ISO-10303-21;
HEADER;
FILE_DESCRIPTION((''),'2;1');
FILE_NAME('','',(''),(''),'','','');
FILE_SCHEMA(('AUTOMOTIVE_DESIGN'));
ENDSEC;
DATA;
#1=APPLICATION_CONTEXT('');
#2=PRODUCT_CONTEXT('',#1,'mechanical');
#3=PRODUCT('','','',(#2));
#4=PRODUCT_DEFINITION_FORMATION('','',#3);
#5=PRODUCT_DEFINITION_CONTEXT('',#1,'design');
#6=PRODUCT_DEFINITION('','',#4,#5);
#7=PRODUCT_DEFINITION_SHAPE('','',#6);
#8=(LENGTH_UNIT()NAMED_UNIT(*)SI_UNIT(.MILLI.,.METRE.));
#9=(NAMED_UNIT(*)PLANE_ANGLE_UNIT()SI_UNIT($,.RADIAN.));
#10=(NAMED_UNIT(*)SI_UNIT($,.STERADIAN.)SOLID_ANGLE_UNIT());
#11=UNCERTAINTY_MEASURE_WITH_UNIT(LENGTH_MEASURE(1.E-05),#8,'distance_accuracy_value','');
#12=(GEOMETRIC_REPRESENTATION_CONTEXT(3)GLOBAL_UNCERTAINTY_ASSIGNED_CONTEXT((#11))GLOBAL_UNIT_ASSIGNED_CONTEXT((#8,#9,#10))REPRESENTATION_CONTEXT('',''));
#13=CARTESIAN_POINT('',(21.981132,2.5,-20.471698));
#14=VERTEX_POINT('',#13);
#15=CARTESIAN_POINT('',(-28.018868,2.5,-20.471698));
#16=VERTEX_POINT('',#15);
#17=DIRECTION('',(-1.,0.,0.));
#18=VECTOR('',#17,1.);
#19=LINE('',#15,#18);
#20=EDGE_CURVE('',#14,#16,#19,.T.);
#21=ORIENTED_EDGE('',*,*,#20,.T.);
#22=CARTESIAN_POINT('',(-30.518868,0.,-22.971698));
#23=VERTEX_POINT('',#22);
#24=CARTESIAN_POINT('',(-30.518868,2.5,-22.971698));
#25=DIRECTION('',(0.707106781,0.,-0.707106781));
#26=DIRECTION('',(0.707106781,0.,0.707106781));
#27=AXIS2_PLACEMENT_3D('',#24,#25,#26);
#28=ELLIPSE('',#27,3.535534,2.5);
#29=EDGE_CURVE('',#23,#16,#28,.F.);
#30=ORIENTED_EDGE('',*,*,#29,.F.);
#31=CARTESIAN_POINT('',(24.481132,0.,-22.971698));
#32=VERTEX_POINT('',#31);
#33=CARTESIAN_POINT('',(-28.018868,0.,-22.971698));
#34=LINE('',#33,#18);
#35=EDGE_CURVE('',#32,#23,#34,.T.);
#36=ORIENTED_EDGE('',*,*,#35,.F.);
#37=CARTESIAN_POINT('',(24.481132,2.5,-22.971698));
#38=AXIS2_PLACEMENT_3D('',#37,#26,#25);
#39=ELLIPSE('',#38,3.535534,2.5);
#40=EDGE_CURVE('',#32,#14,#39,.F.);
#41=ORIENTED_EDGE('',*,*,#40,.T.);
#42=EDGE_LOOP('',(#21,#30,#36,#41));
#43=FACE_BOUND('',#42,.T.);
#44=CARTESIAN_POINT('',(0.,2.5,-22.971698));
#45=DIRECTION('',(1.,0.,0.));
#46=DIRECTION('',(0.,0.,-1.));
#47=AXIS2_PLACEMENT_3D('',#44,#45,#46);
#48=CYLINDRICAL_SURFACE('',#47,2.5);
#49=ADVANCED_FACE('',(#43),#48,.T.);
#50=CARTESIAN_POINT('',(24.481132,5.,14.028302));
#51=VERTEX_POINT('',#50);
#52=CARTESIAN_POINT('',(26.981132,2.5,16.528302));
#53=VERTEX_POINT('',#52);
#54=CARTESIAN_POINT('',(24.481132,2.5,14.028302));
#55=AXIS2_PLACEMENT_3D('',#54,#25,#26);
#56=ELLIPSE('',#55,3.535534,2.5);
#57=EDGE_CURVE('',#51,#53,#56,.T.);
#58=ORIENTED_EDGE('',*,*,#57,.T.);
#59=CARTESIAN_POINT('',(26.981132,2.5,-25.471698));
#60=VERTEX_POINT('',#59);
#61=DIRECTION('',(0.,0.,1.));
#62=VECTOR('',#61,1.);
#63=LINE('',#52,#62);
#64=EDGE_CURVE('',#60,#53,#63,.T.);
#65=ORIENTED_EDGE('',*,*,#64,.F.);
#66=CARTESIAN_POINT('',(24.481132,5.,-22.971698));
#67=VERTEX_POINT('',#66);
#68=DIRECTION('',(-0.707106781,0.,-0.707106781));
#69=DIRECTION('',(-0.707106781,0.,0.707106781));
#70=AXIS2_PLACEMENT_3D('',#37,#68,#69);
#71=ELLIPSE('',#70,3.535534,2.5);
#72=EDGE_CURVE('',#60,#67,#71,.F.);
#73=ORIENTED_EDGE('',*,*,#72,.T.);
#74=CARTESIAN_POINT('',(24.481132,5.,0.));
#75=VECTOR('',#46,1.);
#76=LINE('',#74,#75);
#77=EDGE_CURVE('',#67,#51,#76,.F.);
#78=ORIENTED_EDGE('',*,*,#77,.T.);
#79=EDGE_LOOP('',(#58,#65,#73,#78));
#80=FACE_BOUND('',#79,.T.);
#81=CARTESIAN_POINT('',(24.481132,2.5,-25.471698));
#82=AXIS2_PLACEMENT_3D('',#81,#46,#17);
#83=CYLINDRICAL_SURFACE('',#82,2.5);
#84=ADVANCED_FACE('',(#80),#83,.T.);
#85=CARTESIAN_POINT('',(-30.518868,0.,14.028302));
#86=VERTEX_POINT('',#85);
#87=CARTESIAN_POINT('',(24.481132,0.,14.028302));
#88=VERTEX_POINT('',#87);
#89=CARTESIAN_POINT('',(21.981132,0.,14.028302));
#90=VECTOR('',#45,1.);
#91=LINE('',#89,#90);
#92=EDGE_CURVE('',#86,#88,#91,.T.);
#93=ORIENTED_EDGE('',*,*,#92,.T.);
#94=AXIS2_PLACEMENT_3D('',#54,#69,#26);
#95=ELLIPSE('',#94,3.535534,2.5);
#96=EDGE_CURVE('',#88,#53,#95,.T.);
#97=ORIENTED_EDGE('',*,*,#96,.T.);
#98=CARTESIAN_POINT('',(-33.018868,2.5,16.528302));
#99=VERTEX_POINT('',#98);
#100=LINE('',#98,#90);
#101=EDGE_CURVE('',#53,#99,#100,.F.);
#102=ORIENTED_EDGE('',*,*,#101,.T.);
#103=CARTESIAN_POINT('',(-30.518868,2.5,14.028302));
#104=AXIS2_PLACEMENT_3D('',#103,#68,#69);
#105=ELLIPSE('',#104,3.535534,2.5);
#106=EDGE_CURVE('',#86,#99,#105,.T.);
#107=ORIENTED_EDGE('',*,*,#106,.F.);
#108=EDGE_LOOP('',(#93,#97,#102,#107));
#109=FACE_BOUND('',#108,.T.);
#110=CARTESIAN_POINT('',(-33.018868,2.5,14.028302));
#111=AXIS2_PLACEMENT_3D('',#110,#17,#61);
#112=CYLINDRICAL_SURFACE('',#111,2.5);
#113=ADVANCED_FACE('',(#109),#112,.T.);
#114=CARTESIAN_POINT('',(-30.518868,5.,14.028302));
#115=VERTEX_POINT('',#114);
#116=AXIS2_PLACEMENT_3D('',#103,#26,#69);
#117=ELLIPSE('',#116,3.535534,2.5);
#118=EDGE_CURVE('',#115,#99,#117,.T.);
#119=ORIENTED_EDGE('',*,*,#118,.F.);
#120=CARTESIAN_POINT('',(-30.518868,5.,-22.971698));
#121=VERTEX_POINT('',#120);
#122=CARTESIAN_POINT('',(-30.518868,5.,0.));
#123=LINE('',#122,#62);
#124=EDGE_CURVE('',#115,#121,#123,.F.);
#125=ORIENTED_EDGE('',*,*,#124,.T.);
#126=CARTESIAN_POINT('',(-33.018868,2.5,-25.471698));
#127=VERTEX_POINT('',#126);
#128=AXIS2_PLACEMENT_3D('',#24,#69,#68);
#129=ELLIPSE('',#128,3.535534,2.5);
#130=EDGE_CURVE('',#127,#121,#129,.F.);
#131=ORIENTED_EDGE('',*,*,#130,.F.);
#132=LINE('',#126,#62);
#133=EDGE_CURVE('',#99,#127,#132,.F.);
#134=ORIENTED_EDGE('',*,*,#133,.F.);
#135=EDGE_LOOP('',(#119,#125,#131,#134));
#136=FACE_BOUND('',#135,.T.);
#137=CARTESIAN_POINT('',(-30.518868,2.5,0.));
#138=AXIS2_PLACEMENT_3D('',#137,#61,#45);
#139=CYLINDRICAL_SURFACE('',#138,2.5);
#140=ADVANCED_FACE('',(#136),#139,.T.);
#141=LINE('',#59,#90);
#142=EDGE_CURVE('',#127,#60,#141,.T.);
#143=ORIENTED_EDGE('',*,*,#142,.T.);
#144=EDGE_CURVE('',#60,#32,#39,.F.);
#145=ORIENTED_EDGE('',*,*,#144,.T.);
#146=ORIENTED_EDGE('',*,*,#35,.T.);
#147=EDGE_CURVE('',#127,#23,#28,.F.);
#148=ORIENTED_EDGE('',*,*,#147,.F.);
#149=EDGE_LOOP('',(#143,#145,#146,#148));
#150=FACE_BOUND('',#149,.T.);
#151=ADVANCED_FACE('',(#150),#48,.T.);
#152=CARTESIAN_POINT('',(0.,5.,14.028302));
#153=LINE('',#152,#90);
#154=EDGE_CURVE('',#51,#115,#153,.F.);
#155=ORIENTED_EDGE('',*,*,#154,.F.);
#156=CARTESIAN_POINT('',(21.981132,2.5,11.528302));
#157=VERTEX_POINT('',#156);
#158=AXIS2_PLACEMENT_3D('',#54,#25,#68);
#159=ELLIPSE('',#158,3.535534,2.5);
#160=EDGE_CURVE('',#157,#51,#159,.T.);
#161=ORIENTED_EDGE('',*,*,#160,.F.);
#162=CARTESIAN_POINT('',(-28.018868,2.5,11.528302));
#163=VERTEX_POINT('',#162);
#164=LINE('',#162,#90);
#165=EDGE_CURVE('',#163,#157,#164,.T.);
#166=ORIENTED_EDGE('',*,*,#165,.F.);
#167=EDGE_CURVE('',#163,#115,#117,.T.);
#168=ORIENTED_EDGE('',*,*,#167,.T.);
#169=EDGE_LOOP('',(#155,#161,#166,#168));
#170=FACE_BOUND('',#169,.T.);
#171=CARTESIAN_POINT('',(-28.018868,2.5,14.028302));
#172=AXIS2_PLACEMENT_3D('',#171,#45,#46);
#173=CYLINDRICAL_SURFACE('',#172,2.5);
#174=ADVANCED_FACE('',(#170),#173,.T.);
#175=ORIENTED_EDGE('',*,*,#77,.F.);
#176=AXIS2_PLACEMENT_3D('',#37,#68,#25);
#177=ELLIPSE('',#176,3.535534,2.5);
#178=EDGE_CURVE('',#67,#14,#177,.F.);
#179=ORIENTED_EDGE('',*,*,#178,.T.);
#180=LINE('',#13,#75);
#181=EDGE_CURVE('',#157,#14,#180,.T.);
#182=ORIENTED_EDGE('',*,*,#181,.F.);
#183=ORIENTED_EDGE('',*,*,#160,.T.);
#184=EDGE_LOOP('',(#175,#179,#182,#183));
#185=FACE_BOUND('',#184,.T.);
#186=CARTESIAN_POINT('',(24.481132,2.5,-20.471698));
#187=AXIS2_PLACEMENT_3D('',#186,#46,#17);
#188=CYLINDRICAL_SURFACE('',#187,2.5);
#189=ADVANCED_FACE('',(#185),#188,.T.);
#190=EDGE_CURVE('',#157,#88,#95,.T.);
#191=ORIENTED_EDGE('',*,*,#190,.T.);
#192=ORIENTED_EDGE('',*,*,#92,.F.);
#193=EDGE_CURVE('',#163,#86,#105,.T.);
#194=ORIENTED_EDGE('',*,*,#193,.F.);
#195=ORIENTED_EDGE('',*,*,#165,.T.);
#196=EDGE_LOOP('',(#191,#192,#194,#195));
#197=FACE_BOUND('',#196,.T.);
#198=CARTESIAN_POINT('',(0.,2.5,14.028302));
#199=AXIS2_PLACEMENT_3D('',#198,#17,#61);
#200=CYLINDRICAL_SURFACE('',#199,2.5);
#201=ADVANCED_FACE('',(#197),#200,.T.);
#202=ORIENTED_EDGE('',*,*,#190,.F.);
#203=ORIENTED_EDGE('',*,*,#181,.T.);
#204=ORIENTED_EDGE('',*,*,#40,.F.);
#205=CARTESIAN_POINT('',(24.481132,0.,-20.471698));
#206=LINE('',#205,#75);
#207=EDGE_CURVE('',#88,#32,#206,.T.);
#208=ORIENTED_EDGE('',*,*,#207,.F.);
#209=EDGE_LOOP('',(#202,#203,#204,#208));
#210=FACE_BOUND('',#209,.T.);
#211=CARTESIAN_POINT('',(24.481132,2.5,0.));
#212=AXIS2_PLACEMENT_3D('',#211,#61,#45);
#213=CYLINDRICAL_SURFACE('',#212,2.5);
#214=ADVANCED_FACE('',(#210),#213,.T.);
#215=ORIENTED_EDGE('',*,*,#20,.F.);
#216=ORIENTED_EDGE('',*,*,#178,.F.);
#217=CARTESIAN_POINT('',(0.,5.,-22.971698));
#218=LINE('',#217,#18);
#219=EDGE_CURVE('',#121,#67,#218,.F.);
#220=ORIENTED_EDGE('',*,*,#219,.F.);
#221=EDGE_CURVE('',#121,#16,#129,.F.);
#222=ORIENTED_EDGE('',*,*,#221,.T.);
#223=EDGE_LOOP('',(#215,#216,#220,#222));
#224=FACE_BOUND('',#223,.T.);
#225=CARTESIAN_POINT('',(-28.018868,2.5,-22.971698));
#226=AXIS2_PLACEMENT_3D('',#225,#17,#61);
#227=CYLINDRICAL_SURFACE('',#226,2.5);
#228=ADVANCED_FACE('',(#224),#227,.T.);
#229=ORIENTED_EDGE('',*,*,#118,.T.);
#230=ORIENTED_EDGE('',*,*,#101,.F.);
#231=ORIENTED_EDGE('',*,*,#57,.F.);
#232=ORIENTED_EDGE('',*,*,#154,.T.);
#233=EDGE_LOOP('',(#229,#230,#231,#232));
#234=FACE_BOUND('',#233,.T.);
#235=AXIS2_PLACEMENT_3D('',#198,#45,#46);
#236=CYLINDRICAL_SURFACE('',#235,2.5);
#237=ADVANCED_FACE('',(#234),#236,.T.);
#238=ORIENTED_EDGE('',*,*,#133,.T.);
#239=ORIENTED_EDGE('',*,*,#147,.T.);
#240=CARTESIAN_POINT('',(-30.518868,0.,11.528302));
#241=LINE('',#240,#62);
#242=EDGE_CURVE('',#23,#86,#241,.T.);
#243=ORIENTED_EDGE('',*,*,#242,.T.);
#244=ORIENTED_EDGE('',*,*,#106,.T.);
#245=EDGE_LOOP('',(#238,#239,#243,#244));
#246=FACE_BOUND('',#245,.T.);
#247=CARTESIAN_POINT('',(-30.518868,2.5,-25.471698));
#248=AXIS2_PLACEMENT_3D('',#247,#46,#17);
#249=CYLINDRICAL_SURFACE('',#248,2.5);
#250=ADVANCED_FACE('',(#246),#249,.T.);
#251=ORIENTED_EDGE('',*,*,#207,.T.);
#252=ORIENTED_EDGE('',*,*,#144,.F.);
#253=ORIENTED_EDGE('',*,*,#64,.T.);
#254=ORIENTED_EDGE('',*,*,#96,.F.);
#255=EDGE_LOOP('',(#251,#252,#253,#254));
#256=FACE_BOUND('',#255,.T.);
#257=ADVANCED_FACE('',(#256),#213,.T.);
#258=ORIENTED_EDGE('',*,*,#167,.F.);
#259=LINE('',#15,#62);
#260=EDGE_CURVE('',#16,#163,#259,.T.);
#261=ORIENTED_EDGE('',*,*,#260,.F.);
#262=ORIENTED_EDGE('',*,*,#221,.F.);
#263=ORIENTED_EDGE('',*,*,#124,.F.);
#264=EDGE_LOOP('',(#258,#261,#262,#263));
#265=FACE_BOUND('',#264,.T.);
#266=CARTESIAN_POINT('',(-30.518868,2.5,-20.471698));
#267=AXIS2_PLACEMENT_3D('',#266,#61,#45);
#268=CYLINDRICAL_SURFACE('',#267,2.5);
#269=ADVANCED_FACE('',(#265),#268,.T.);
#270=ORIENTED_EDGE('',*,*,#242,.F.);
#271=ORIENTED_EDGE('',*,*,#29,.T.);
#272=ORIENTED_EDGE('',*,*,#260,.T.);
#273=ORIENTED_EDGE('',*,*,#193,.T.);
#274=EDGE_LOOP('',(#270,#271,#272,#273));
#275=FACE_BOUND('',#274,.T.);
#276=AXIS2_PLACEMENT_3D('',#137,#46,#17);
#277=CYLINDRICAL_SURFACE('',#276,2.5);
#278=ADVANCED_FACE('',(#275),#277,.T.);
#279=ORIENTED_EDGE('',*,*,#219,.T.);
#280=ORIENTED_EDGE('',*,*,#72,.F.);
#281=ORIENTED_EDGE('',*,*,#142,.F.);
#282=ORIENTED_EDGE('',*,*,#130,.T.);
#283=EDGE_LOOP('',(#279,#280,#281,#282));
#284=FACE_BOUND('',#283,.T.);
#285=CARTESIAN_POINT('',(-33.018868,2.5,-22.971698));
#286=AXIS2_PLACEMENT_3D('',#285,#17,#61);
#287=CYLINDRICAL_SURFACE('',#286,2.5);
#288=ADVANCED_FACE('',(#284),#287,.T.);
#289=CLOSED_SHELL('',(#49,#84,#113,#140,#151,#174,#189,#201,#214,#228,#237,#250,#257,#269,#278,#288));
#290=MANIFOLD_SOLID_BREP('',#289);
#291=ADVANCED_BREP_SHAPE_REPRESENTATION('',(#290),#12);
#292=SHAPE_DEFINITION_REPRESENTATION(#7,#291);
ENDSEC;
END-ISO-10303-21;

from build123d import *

# Parameters (mm, degrees)
SKETCH1_W           = 60
SKETCH1_H           = 42
BOSS_EXTRUDE1_DEPTH = 5
SKETCH2_W           = 50
SKETCH2_H           = 32
CUT_EXTRUDE1_DEPTH  = 5
FILLET1_R           = 2.5
FILLET2_R           = 2.5


with BuildPart() as part:
    # Sketch1 → Boss-Extrude1 (new body)
    with BuildSketch(Plane(origin=(0, 0, 0), x_dir=(1, 0, 0), z_dir=(0, 1, 0))):
        with Locations((-3.018867925, 4.471698113)):
            Rectangle(SKETCH1_W, SKETCH1_H)
    extrude(amount=BOSS_EXTRUDE1_DEPTH)

    # Sketch2 → Cut-Extrude1 (cut)
    with BuildSketch(Plane(origin=(0, 5, 0), x_dir=(1, 0, 0), z_dir=(0, 1, 0))):
        with Locations((-3.018867925, 4.471698113)):
            Rectangle(SKETCH2_W, SKETCH2_H)
    extrude(amount=-CUT_EXTRUDE1_DEPTH, mode=Mode.SUBTRACT)

    # Fillet1
    fillet1_edges = [part.edges().sort_by_distance(p)[0] for p in [
        (-3.018867925, 5, 16.528301887),
        (-33.018867925, 5, -4.471698113),
        (-28.018867925, 5, -4.471698113),
        (-3.018867925, 5, 11.528301887),
        (21.981132075, 5, -4.471698113),
        (-3.018867925, 5, -20.471698113),
        (-3.018867925, 5, -25.471698113),
        (26.981132075, 5, -4.471698113),
    ]]
    fillet(fillet1_edges, radius=FILLET1_R - 0.0001)  # a hair under: the kernel refuses the full size

    # Fillet2
    fillet2_edges = [part.edges().sort_by_distance(p)[0] for p in [
        (-33.018867925, 0, -4.471698113),
        (-3.018867925, 0, 16.528301887),
        (26.981132075, 0, -4.471698113),
        (-3.018867925, 0, -25.471698113),
        (-3.018867925, 0, -20.471698113),
        (21.981132075, 0, -4.471698113),
        (-3.018867925, 0, 11.528301887),
        (-28.018867925, 0, -4.471698113),
    ]]
    fillet(fillet2_edges, radius=FILLET2_R - 0.0001)  # a hair under: the kernel refuses the full size


solid = part.part
